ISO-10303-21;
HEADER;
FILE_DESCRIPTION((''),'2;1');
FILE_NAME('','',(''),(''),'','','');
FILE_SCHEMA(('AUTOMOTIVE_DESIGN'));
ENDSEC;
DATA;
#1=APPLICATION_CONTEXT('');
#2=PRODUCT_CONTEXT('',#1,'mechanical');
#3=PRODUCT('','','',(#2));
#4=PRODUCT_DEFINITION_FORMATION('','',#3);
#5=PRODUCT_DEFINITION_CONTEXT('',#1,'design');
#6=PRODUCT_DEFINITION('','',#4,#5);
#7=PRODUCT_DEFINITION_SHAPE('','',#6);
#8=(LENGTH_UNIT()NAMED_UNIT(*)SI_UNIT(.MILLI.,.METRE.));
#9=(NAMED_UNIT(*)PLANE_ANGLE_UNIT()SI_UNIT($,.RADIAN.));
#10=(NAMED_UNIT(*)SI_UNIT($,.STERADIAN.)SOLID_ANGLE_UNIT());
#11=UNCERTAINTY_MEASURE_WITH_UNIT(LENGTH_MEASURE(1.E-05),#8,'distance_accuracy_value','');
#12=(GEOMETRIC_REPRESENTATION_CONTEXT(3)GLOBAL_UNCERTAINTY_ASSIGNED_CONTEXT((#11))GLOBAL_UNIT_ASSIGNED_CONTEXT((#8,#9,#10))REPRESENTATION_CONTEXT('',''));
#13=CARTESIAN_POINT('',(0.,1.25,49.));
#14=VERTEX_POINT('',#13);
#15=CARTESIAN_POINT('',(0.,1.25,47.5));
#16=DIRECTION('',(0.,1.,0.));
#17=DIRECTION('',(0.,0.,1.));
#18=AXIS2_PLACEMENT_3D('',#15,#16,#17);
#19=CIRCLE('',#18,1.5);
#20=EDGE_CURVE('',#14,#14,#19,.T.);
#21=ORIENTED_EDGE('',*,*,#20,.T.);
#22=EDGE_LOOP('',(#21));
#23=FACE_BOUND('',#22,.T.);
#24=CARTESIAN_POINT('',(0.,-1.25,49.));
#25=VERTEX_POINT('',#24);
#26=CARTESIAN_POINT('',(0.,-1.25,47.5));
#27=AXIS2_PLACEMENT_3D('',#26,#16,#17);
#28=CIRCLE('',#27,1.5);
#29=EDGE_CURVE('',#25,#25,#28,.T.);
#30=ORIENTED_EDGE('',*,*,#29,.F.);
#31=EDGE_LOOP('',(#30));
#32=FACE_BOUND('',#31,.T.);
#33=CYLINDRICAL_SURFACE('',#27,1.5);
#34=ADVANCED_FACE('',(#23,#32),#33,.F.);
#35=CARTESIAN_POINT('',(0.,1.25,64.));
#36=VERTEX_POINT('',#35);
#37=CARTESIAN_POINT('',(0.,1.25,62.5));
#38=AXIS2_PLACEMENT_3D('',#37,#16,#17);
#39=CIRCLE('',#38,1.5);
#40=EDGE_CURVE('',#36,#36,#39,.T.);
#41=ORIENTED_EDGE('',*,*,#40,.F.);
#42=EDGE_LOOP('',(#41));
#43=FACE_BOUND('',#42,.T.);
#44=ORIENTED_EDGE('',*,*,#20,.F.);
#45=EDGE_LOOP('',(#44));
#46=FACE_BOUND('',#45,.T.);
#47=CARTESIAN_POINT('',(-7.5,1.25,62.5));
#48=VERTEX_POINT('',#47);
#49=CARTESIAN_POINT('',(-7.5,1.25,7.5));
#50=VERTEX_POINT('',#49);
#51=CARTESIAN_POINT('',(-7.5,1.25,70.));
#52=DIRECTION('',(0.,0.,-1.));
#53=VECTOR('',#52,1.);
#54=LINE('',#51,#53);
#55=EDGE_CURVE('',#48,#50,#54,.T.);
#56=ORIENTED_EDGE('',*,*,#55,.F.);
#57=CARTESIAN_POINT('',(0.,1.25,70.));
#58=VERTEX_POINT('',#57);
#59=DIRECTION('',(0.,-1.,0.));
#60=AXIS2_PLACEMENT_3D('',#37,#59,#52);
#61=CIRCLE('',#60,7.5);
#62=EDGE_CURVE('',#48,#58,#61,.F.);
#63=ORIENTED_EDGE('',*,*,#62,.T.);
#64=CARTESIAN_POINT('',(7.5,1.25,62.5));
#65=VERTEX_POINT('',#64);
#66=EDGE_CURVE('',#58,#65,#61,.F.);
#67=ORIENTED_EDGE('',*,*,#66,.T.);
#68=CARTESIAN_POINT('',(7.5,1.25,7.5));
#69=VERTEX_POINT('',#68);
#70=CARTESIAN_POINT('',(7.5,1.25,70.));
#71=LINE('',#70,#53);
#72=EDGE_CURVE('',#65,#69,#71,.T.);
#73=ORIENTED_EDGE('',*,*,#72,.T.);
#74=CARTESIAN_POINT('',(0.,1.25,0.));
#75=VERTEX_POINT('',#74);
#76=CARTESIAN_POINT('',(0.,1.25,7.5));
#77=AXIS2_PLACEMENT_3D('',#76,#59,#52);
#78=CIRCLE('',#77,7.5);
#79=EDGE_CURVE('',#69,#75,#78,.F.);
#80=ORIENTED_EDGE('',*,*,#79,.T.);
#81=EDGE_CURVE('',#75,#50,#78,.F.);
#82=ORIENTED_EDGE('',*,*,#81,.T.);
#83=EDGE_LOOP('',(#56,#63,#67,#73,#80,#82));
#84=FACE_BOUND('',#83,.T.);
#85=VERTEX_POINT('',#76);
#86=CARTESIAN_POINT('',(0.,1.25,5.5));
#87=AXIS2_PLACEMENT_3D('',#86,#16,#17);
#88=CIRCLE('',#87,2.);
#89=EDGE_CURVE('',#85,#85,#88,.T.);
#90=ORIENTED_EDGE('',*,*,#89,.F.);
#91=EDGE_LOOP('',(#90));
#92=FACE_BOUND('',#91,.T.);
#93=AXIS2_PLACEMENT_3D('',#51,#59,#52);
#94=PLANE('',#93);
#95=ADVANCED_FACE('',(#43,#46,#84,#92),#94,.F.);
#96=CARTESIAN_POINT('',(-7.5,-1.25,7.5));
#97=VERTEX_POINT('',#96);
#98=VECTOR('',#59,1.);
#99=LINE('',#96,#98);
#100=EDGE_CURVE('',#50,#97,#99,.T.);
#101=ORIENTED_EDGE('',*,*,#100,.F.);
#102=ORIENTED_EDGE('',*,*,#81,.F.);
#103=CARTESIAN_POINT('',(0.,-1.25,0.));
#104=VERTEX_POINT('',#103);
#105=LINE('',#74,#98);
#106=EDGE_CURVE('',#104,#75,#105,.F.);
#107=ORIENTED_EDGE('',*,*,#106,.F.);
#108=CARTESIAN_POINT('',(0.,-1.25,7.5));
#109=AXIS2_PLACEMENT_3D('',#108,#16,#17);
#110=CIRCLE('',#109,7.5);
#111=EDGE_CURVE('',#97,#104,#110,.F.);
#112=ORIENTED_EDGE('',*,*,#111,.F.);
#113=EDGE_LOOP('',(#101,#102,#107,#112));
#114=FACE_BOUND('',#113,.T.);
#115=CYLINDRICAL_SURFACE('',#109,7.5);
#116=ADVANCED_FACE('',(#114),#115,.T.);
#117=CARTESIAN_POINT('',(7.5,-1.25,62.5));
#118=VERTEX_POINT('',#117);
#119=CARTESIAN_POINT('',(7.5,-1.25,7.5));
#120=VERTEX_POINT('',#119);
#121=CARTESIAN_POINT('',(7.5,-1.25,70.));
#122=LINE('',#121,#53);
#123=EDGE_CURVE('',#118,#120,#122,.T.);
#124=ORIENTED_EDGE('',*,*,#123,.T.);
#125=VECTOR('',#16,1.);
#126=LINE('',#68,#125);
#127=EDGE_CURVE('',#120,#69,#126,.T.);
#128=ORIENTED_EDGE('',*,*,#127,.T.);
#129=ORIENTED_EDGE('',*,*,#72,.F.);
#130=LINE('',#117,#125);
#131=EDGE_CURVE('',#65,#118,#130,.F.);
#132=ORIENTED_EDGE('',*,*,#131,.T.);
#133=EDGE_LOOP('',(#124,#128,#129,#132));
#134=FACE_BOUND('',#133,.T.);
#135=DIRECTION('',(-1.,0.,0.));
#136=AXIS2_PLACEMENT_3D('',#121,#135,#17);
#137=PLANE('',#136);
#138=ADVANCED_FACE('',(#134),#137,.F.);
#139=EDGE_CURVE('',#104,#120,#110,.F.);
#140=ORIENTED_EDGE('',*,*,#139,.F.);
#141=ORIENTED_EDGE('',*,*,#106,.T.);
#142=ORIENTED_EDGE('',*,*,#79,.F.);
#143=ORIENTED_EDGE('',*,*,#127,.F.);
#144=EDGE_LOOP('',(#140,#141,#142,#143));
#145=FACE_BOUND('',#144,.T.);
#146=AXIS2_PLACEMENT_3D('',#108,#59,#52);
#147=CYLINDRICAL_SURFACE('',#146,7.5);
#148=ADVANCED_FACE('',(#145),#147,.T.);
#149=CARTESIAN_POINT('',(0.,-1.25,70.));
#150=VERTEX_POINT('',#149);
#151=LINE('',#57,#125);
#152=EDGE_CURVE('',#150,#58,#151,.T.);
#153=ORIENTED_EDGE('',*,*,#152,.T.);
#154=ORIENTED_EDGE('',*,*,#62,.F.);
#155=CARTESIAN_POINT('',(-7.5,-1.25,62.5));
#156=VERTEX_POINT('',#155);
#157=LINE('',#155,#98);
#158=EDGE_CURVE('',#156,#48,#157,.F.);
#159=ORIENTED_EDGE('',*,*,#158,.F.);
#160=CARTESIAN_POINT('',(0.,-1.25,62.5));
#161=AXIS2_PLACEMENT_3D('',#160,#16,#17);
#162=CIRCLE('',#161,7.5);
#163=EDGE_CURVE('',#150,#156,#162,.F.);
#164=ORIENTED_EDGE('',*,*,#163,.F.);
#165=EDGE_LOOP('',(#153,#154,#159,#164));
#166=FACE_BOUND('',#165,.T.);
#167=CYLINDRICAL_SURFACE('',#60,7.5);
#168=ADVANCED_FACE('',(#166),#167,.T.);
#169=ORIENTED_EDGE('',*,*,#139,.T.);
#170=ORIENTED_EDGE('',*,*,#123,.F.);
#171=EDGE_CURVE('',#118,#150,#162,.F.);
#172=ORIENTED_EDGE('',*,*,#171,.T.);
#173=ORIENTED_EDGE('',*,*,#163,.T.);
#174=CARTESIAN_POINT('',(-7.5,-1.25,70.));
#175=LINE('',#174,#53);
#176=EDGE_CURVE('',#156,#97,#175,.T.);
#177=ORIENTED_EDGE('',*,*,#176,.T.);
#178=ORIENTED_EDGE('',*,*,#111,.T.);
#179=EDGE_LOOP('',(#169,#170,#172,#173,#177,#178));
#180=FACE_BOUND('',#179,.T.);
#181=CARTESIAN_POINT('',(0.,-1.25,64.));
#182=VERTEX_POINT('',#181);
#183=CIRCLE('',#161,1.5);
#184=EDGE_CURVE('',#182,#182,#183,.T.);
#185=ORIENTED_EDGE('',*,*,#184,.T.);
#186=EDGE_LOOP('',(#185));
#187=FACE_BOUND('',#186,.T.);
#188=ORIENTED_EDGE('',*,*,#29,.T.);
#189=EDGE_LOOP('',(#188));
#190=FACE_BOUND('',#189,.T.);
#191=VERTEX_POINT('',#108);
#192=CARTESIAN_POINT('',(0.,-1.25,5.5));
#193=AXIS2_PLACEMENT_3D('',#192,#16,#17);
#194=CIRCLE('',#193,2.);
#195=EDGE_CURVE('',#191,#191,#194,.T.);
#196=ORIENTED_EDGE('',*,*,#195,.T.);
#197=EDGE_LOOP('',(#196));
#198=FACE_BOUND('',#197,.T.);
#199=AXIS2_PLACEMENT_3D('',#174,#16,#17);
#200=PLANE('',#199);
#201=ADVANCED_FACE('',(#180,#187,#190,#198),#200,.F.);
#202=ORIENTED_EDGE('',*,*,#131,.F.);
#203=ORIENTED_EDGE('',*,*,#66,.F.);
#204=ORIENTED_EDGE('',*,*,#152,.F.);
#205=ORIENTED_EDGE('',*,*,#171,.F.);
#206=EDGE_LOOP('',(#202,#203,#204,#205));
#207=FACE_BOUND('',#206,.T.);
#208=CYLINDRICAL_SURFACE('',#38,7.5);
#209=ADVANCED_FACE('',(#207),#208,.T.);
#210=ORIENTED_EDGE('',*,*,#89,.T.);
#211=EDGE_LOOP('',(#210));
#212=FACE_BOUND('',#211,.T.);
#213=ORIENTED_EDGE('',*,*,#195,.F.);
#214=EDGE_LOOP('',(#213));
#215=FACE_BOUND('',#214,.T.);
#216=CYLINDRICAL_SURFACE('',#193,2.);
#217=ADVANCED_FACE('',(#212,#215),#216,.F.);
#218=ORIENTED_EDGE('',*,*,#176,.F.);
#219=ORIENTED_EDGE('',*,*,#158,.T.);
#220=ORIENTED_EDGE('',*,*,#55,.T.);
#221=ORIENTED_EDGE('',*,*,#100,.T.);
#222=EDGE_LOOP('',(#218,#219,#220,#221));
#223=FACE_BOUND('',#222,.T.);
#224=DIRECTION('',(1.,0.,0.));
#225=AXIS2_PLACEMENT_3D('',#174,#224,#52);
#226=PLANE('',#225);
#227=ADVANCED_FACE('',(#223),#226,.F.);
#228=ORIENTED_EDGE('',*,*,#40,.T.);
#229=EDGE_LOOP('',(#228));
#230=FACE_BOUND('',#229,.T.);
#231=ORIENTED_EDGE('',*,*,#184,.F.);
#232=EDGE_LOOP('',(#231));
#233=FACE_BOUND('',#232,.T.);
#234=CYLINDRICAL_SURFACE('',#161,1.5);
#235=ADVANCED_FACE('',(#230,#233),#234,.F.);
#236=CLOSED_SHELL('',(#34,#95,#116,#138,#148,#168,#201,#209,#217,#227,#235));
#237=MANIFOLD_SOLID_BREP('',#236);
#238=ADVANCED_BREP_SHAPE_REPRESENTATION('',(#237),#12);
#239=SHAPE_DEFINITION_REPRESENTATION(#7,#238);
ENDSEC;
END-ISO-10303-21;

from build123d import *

# Parameters (mm, degrees)
ESQUISSE1_W      = 15
ESQUISSE1_H      = 2.5
EXTRUSION1_DEPTH = 70
CONG_1_R         = 7.5
ESQUISSE2_R      = 1.5
EXTRUSION2_DEPTH = 71.445014018
ESQUISSE3_R      = 2
EXTRUSION3_DEPTH = 71.445014018
CONG_2_R         = 7.5
ESQUISSE4_R      = 1.5
EXTRUSION4_DEPTH = 71.445014018


with BuildPart() as part:
    # Esquisse1 → Extrusion1 (new body)
    with BuildSketch(Plane.XY):
        Rectangle(ESQUISSE1_W, ESQUISSE1_H)
    extrude(amount=EXTRUSION1_DEPTH)

    # Congé1
    cong_1_edges = [part.edges().sort_by_distance(p)[0] for p in [
        (-7.5, 0, 70),
        (7.5, 0, 70),
    ]]
    fillet(cong_1_edges, radius=CONG_1_R - 0.0001)  # a hair under: the kernel refuses the full size

    # Esquisse2 → Extrusion2 (cut, through all)
    with BuildSketch(Plane(origin=(0, 1.25, 0), x_dir=(1, 0, 0), z_dir=(0, 1, 0))):
        with Locations(Location((0, -62.5, 0), (0, 0, 270))):
            Circle(ESQUISSE2_R)
    extrude(amount=-EXTRUSION2_DEPTH, mode=Mode.SUBTRACT)

    # Esquisse3 → Extrusion3 (cut, through all)
    with BuildSketch(Plane(origin=(0, 1.25, 0), x_dir=(1, 0, 0), z_dir=(0, 1, 0))):
        with Locations(Location((0, -5.5, 0), (0, 0, 270))):
            Circle(ESQUISSE3_R)
    extrude(amount=-EXTRUSION3_DEPTH, mode=Mode.SUBTRACT)

    # Congé2
    cong_2_edges = [part.edges().sort_by_distance(p)[0] for p in [
        (7.5, 0, 0),
        (-7.5, 0, 0),
    ]]
    fillet(cong_2_edges, radius=CONG_2_R - 0.0001)  # a hair under: the kernel refuses the full size

    # Esquisse4 → Extrusion4 (cut, through all)
    with BuildSketch(Plane(origin=(0, 1.25, 0), x_dir=(1, 0, 0), z_dir=(0, 1, 0))):
        with Locations(Location((0, -47.5, 0), (0, 0, 270))):
            Circle(ESQUISSE4_R)
    extrude(amount=-EXTRUSION4_DEPTH, mode=Mode.SUBTRACT)


solid = part.part
